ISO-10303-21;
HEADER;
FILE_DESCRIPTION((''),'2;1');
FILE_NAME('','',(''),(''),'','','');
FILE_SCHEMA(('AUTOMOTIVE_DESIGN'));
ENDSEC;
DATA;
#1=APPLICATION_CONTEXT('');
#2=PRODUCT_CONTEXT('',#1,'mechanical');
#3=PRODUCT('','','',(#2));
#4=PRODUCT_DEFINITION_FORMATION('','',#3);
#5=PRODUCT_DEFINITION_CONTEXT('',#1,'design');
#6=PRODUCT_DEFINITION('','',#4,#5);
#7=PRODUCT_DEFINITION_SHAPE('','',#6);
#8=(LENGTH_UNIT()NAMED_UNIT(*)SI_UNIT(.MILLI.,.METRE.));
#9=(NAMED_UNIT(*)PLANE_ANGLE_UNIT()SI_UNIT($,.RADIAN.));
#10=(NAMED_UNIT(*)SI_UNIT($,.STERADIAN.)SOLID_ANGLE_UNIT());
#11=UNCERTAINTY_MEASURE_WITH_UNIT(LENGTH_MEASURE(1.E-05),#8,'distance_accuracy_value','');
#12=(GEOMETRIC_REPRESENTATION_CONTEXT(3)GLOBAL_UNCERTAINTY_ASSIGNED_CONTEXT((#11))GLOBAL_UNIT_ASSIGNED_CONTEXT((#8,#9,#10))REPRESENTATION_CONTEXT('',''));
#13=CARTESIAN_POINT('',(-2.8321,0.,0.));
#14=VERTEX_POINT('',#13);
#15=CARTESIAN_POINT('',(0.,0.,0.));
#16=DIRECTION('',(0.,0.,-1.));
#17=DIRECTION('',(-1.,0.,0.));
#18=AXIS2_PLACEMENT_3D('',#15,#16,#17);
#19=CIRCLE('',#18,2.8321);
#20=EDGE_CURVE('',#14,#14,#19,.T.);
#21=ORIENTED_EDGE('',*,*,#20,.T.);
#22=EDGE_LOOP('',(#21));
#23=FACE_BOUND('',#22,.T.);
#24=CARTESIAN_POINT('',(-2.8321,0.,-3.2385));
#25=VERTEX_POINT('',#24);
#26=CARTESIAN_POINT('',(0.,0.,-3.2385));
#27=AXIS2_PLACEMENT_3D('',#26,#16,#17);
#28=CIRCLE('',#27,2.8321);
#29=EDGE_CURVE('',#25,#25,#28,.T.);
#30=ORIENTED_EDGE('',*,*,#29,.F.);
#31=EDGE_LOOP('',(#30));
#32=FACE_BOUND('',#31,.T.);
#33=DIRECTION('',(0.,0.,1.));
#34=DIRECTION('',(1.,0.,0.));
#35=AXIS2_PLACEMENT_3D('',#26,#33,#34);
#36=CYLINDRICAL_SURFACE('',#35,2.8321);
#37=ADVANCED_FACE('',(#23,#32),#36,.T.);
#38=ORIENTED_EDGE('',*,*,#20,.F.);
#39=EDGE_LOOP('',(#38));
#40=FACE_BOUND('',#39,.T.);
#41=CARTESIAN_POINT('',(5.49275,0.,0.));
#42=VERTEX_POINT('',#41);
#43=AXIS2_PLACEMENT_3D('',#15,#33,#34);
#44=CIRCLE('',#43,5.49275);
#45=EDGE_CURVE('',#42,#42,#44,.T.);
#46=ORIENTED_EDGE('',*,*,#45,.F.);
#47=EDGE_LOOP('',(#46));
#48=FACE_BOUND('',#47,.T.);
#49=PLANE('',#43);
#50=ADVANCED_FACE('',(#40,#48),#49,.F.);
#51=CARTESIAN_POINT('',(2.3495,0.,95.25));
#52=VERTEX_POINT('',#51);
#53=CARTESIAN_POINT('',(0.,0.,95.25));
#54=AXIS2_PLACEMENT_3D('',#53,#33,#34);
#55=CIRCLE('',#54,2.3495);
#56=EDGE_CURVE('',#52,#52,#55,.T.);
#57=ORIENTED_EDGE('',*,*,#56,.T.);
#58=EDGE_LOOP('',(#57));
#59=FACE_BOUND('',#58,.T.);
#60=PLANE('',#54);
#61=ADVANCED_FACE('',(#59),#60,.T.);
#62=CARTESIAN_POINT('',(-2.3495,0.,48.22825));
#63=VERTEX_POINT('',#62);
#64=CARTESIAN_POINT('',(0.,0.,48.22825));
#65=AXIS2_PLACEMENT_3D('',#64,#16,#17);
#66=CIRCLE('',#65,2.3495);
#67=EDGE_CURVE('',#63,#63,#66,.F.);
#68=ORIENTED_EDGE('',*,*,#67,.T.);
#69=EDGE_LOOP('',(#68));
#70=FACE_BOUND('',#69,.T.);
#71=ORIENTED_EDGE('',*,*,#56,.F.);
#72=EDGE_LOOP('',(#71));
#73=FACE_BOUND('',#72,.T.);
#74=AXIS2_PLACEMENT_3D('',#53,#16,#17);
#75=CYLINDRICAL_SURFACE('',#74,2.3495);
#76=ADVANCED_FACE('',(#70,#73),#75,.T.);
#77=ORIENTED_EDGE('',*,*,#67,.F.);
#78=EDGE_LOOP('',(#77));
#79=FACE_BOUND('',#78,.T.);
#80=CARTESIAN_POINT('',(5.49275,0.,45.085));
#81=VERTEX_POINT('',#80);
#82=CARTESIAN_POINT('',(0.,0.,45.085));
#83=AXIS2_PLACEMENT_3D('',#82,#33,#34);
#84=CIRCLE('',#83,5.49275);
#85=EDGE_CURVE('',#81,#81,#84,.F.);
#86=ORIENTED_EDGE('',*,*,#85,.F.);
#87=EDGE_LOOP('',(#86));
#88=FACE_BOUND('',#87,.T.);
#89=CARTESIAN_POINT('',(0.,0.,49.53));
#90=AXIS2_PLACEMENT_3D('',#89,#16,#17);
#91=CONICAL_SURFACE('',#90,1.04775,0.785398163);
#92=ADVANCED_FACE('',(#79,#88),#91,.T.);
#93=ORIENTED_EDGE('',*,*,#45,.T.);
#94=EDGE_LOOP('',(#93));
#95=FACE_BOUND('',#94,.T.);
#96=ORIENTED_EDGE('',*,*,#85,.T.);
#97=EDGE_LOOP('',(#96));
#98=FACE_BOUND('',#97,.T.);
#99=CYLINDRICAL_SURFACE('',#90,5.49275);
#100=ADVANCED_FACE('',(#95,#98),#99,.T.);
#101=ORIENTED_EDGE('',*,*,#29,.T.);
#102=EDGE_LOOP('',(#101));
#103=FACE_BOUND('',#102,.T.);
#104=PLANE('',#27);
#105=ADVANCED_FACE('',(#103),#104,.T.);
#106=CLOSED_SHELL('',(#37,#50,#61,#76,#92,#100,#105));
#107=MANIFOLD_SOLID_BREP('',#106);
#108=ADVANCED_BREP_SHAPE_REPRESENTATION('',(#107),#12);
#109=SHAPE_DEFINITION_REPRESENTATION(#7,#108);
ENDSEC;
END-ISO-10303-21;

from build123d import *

# Parameters (mm, degrees)
SKETCH1_R           = 5.49275
BOSS_EXTRUDE1_DEPTH = 49.53
SKETCH2_R           = 2.3495
BOSS_EXTRUDE2_DEPTH = 45.72
CHAMFER1_SIZE       = 4.445
SKETCH3_R           = 2.8321
BOSS_EXTRUDE3_DEPTH = 3.2385


with BuildPart() as part:
    # Sketch1 → Boss-Extrude1 (new body)
    with BuildSketch(Plane.XY):
        Circle(SKETCH1_R)
    extrude(amount=BOSS_EXTRUDE1_DEPTH)

    # Sketch2 → Boss-Extrude2 (add)
    with BuildSketch(Plane.XY.offset(49.53)):
        Circle(SKETCH2_R)
    extrude(amount=BOSS_EXTRUDE2_DEPTH)

    # Chamfer1
    # the kernel refuses this chamfer: 4.445 mm, written as the material it takes off along each edge
    with BuildSketch(Plane(origin=(0, 0, 49.53), x_dir=(1, 0, 0), z_dir=(0, -1, 0))) as chamfer1_piece_1_section:
        Polygon((5.49275, -CHAMFER1_SIZE), (5.49275 - CHAMFER1_SIZE, 0), (5.49275, 0), align=None)
    chamfer1_piece_1 = revolve(axis=Axis((0, 0, 49.53), (0, 0, 1)), mode=Mode.PRIVATE)
    chamfer1_piece_1 = chamfer1_piece_1 - Plane(origin=(0, 0, 46.639044466), x_dir=(1, 0, 0), z_dir=(0, 0, -1)) * Cylinder(2.3495, 22, mode=Mode.PRIVATE)
    add(chamfer1_piece_1, mode=Mode.SUBTRACT)

    # Sketch3 → Boss-Extrude3 (add)
    with BuildSketch(Plane(origin=(0, 0, 0), x_dir=(-1, 0, 0), z_dir=(0, 0, -1))):
        Circle(SKETCH3_R)
    extrude(amount=BOSS_EXTRUDE3_DEPTH)


solid = part.part
